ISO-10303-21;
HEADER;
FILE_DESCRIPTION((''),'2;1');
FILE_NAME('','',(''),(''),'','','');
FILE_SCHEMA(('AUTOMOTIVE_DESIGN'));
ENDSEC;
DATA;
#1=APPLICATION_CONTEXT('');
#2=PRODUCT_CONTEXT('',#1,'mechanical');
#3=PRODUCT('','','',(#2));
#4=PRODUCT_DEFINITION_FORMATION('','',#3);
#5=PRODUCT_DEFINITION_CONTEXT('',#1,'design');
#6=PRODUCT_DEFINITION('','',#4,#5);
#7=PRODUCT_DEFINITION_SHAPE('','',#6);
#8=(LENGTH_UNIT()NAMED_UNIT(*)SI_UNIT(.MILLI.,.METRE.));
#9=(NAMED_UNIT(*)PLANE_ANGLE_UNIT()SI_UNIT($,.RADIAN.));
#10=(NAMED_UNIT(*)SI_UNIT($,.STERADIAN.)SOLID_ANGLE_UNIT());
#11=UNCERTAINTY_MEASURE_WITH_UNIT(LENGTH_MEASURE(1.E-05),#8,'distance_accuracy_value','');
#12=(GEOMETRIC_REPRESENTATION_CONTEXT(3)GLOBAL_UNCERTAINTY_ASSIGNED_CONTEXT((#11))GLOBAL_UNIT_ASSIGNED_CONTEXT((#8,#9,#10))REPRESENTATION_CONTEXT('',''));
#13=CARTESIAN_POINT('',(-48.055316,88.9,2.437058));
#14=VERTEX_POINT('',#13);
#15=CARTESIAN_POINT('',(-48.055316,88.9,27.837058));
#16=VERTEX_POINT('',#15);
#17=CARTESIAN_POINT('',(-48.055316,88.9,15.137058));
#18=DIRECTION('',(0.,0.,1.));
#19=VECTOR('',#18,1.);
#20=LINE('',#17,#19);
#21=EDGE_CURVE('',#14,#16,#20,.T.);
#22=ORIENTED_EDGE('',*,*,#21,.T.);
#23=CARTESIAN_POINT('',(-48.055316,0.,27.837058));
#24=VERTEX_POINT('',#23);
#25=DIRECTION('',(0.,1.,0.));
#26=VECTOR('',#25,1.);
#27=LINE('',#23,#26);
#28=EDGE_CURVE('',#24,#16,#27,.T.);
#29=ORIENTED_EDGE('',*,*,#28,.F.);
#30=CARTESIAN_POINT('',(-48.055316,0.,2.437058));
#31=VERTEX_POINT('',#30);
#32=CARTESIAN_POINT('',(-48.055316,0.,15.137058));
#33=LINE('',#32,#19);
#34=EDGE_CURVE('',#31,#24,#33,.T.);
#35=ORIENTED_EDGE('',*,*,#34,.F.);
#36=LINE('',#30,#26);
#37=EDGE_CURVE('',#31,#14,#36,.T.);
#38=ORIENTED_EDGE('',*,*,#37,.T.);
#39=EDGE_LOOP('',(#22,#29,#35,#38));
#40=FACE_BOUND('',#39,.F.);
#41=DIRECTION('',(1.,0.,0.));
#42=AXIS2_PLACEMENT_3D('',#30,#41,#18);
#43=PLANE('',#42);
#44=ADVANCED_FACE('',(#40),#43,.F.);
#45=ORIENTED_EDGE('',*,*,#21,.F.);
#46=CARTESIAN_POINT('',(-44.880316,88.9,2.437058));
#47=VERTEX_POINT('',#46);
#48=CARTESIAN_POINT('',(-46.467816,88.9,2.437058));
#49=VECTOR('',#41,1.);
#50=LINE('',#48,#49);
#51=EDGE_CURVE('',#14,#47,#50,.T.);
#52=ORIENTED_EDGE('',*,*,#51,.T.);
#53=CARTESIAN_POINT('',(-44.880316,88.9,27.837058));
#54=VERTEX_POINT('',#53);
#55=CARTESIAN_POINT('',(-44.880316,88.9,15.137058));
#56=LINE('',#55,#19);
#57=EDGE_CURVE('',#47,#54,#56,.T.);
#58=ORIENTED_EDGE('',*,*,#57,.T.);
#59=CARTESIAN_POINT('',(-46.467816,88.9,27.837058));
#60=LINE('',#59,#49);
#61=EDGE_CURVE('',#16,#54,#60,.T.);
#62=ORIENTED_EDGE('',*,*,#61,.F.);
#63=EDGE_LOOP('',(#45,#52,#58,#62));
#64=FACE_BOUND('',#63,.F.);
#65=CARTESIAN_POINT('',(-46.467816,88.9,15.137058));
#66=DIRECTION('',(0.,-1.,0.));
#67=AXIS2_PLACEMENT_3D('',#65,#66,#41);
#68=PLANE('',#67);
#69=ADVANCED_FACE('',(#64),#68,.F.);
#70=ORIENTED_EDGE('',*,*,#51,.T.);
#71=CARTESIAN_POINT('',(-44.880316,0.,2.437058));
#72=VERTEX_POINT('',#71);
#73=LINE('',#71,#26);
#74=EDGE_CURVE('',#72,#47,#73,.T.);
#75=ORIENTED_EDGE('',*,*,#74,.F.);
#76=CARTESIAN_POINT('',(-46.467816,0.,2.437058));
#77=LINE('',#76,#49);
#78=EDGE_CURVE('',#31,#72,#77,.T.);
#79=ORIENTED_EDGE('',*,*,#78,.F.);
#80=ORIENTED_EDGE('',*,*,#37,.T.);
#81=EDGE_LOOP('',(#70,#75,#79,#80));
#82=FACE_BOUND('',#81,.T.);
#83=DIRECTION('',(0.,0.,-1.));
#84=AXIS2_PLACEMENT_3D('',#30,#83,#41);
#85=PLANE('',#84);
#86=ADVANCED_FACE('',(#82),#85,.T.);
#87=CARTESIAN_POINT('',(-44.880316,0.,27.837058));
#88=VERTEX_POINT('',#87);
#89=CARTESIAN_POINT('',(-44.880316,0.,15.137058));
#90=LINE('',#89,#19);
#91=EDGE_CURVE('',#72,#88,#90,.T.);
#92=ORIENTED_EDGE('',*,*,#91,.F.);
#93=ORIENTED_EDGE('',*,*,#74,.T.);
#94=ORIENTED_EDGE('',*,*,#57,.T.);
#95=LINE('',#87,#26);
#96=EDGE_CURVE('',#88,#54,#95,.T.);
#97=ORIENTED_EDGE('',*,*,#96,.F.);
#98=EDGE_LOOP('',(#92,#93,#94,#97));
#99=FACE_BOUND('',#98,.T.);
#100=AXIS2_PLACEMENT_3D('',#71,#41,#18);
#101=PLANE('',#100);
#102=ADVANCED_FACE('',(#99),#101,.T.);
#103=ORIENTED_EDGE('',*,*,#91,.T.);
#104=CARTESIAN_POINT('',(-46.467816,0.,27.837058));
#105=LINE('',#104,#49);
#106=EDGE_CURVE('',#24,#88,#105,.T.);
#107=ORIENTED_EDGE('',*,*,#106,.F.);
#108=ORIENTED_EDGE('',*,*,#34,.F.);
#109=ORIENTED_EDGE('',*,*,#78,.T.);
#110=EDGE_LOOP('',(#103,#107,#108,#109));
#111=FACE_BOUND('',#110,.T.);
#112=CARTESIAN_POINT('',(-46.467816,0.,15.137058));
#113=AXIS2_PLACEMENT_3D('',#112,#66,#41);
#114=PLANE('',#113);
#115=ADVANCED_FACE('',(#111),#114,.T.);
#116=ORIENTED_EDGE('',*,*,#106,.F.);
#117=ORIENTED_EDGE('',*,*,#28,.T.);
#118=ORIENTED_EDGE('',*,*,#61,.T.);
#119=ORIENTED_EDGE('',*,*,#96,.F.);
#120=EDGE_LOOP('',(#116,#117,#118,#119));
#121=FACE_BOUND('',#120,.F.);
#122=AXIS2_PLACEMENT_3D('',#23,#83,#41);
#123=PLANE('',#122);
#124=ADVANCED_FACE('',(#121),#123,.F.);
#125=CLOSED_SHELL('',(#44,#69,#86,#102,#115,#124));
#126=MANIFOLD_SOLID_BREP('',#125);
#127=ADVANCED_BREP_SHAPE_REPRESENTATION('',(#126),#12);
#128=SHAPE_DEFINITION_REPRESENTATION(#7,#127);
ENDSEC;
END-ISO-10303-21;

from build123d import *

# Parameters (mm, degrees)
F2_W     = 3.175
F2_H     = 25.4
F3_DEPTH = 88.9


# Not quite as in the source:
# - a feature of the source that left no trace in its solid (it failed there, or was rolled back) is left out


with BuildPart() as f3:
    # F2 (on Front) → F3 (new body)
    with BuildSketch(Plane.XZ):
        with Locations((-46.4678156614, 15.1370579049)):
            Rectangle(F2_W, F2_H)
    extrude(amount=-F3_DEPTH)


solid = f3.part
